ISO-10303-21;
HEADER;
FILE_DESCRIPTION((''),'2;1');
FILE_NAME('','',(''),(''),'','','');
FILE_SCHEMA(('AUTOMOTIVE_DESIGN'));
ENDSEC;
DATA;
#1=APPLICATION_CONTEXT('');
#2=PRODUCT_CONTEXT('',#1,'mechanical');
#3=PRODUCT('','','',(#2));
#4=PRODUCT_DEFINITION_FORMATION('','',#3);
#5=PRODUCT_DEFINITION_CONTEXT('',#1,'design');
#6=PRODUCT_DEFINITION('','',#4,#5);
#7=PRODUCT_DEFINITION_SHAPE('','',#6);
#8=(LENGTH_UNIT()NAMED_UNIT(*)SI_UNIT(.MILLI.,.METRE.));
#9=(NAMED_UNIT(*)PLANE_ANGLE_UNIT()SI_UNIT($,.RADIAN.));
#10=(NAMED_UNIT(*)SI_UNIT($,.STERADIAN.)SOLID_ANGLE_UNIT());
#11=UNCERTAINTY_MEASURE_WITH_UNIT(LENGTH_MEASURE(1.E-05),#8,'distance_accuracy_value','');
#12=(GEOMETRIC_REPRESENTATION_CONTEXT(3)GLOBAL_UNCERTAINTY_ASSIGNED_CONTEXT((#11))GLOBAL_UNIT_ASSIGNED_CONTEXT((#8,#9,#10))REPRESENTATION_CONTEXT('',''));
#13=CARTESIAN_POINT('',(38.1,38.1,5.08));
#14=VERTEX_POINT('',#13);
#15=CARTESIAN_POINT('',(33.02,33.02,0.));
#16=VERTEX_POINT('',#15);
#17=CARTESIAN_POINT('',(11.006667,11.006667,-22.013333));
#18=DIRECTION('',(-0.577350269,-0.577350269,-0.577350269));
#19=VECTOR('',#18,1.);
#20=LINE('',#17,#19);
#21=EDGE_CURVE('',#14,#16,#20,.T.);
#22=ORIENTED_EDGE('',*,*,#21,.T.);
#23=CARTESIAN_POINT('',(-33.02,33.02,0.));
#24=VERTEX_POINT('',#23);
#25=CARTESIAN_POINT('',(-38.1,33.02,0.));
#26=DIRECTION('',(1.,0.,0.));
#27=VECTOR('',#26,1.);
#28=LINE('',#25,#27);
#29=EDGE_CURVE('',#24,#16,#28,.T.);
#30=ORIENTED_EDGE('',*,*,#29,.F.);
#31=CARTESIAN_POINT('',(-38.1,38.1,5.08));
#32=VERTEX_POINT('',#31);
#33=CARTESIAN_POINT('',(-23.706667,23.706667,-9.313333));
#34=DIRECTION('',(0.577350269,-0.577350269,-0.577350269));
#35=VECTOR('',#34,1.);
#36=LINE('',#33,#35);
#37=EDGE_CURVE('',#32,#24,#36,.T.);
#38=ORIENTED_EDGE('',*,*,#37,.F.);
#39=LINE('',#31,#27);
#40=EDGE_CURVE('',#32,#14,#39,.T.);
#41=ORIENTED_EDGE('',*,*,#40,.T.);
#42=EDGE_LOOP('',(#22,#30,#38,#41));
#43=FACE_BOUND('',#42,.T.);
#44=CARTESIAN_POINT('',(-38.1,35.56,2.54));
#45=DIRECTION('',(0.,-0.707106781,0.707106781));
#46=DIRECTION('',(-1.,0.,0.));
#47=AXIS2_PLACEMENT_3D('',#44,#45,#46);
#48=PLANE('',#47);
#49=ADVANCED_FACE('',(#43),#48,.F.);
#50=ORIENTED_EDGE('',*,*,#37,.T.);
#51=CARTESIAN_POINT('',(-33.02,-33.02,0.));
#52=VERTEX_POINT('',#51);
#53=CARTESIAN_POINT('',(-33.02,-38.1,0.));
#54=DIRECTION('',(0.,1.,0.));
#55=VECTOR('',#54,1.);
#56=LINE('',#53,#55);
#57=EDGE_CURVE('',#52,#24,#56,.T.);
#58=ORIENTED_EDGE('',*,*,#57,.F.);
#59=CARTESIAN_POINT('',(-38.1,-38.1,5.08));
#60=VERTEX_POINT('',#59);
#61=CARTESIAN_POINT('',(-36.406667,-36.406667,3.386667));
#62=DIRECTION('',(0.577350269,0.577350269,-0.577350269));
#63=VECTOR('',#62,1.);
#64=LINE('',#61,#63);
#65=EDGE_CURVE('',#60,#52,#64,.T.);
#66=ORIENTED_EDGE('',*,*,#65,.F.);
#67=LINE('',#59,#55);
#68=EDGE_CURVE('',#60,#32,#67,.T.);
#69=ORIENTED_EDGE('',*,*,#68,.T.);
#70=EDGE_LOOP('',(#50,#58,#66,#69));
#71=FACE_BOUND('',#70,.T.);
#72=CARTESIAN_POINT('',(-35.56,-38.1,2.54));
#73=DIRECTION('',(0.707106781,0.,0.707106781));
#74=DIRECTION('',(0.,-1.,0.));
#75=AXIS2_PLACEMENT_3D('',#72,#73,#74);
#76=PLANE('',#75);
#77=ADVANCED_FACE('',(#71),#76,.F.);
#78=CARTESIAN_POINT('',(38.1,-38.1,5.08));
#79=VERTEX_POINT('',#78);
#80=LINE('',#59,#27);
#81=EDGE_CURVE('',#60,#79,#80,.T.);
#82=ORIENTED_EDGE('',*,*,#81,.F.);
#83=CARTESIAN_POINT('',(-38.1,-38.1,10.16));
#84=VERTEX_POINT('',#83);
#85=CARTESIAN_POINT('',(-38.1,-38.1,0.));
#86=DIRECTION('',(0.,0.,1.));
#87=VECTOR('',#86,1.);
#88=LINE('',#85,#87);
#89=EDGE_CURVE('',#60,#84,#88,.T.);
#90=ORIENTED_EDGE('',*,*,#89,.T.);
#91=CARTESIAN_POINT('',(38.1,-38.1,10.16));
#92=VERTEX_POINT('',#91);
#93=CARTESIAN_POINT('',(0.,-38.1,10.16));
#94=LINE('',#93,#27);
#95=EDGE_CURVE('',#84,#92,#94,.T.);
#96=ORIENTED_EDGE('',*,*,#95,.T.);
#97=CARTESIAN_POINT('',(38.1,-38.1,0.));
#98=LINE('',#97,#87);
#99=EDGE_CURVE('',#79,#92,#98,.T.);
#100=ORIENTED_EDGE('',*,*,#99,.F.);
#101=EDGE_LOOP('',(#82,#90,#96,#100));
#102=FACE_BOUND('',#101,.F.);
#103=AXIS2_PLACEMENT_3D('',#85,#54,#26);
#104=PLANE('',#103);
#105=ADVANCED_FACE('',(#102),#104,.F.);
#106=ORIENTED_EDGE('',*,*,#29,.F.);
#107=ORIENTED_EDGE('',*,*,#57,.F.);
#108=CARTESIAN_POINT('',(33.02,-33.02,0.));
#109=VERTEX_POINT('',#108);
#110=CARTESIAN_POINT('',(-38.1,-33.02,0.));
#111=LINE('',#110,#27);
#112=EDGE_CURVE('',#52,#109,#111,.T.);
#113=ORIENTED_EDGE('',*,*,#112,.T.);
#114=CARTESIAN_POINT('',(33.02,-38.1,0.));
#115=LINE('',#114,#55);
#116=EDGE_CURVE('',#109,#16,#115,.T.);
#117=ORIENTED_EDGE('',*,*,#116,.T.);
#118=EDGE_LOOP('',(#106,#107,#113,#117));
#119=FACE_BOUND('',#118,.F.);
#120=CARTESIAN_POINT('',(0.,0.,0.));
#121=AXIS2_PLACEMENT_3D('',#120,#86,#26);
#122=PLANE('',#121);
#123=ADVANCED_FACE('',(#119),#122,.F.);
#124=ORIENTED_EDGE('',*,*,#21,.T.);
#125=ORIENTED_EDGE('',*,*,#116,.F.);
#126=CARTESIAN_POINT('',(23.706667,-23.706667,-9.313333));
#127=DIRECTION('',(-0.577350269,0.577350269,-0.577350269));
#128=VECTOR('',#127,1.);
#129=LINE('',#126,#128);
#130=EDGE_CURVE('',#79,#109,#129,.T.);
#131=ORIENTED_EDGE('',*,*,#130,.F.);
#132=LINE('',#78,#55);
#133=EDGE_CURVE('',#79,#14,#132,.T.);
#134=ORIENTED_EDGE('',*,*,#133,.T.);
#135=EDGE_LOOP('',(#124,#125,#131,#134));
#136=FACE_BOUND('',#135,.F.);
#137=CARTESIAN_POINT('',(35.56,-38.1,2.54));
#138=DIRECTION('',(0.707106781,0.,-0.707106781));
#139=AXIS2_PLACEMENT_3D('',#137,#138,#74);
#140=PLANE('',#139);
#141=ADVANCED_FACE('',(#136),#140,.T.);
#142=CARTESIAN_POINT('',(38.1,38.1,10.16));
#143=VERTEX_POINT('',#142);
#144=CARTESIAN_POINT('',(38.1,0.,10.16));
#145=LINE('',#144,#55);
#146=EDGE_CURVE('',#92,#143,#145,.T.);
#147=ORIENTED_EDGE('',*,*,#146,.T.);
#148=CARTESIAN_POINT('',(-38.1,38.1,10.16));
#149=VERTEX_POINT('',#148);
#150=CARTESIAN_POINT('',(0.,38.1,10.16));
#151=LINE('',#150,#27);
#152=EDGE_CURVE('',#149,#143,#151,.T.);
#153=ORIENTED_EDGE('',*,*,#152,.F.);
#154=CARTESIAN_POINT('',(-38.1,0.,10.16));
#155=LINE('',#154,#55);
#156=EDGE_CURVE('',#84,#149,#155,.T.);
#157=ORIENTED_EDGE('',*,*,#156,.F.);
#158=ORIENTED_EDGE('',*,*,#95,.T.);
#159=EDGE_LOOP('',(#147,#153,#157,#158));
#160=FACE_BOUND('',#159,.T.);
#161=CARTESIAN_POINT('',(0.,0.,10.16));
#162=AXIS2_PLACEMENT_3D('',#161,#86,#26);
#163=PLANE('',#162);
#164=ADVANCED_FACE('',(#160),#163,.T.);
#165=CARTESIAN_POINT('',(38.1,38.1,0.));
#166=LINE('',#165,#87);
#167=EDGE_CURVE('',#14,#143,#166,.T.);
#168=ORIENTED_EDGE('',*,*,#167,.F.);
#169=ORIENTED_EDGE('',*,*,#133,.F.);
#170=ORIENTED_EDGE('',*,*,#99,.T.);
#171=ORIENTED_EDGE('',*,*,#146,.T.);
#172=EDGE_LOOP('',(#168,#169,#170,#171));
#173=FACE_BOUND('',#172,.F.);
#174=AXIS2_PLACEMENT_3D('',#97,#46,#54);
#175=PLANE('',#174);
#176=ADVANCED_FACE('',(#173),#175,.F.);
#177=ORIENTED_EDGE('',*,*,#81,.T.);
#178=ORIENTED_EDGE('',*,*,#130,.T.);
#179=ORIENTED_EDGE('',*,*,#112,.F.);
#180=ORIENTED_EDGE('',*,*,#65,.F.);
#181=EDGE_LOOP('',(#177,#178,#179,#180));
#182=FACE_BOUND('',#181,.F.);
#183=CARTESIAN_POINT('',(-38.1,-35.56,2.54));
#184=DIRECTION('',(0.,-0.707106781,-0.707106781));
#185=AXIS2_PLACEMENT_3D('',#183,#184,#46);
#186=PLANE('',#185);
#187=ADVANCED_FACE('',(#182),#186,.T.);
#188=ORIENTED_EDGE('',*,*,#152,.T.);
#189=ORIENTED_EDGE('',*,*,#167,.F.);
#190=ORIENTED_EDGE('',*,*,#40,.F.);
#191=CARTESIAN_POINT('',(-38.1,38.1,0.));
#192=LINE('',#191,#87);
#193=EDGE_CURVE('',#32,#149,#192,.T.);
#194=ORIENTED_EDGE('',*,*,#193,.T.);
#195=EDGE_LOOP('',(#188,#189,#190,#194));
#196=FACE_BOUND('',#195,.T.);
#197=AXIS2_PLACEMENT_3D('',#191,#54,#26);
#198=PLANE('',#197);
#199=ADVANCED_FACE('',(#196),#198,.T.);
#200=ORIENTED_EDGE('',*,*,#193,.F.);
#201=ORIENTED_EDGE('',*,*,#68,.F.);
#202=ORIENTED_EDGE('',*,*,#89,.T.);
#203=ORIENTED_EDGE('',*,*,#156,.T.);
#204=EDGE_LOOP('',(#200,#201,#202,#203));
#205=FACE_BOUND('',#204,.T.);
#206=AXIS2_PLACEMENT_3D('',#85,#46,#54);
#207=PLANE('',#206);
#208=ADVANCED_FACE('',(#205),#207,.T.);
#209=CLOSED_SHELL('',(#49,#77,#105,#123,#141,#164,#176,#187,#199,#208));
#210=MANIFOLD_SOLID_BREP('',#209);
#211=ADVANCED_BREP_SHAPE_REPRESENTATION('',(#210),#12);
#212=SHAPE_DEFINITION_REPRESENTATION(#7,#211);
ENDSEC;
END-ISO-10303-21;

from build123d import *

# Parameters (mm, degrees)
F0_W     = 76.2
F0_H     = 76.2
F1_DEPTH = 10.16
F2_SIZE  = 5.08


# Not quite as in the source:
# - the program builds the solid bodies; features that only make, move or delete a surface that nothing else refers to are left out


with BuildPart() as f1:
    # F0 (on Top) → F1 (new body)
    with BuildSketch(Plane.XY):
        Rectangle(F0_W, F0_H)
    extrude(amount=F1_DEPTH)

    # F2
    f2_edges = [f1.edges().sort_by_distance(p)[0] for p in [
        (0, 38.1, 0),
        (38.1, 0, 0),
        (0, -38.1, 0),
        (-38.1, 0, 0),
    ]]
    chamfer(f2_edges, length=F2_SIZE)


solid = f1.part
